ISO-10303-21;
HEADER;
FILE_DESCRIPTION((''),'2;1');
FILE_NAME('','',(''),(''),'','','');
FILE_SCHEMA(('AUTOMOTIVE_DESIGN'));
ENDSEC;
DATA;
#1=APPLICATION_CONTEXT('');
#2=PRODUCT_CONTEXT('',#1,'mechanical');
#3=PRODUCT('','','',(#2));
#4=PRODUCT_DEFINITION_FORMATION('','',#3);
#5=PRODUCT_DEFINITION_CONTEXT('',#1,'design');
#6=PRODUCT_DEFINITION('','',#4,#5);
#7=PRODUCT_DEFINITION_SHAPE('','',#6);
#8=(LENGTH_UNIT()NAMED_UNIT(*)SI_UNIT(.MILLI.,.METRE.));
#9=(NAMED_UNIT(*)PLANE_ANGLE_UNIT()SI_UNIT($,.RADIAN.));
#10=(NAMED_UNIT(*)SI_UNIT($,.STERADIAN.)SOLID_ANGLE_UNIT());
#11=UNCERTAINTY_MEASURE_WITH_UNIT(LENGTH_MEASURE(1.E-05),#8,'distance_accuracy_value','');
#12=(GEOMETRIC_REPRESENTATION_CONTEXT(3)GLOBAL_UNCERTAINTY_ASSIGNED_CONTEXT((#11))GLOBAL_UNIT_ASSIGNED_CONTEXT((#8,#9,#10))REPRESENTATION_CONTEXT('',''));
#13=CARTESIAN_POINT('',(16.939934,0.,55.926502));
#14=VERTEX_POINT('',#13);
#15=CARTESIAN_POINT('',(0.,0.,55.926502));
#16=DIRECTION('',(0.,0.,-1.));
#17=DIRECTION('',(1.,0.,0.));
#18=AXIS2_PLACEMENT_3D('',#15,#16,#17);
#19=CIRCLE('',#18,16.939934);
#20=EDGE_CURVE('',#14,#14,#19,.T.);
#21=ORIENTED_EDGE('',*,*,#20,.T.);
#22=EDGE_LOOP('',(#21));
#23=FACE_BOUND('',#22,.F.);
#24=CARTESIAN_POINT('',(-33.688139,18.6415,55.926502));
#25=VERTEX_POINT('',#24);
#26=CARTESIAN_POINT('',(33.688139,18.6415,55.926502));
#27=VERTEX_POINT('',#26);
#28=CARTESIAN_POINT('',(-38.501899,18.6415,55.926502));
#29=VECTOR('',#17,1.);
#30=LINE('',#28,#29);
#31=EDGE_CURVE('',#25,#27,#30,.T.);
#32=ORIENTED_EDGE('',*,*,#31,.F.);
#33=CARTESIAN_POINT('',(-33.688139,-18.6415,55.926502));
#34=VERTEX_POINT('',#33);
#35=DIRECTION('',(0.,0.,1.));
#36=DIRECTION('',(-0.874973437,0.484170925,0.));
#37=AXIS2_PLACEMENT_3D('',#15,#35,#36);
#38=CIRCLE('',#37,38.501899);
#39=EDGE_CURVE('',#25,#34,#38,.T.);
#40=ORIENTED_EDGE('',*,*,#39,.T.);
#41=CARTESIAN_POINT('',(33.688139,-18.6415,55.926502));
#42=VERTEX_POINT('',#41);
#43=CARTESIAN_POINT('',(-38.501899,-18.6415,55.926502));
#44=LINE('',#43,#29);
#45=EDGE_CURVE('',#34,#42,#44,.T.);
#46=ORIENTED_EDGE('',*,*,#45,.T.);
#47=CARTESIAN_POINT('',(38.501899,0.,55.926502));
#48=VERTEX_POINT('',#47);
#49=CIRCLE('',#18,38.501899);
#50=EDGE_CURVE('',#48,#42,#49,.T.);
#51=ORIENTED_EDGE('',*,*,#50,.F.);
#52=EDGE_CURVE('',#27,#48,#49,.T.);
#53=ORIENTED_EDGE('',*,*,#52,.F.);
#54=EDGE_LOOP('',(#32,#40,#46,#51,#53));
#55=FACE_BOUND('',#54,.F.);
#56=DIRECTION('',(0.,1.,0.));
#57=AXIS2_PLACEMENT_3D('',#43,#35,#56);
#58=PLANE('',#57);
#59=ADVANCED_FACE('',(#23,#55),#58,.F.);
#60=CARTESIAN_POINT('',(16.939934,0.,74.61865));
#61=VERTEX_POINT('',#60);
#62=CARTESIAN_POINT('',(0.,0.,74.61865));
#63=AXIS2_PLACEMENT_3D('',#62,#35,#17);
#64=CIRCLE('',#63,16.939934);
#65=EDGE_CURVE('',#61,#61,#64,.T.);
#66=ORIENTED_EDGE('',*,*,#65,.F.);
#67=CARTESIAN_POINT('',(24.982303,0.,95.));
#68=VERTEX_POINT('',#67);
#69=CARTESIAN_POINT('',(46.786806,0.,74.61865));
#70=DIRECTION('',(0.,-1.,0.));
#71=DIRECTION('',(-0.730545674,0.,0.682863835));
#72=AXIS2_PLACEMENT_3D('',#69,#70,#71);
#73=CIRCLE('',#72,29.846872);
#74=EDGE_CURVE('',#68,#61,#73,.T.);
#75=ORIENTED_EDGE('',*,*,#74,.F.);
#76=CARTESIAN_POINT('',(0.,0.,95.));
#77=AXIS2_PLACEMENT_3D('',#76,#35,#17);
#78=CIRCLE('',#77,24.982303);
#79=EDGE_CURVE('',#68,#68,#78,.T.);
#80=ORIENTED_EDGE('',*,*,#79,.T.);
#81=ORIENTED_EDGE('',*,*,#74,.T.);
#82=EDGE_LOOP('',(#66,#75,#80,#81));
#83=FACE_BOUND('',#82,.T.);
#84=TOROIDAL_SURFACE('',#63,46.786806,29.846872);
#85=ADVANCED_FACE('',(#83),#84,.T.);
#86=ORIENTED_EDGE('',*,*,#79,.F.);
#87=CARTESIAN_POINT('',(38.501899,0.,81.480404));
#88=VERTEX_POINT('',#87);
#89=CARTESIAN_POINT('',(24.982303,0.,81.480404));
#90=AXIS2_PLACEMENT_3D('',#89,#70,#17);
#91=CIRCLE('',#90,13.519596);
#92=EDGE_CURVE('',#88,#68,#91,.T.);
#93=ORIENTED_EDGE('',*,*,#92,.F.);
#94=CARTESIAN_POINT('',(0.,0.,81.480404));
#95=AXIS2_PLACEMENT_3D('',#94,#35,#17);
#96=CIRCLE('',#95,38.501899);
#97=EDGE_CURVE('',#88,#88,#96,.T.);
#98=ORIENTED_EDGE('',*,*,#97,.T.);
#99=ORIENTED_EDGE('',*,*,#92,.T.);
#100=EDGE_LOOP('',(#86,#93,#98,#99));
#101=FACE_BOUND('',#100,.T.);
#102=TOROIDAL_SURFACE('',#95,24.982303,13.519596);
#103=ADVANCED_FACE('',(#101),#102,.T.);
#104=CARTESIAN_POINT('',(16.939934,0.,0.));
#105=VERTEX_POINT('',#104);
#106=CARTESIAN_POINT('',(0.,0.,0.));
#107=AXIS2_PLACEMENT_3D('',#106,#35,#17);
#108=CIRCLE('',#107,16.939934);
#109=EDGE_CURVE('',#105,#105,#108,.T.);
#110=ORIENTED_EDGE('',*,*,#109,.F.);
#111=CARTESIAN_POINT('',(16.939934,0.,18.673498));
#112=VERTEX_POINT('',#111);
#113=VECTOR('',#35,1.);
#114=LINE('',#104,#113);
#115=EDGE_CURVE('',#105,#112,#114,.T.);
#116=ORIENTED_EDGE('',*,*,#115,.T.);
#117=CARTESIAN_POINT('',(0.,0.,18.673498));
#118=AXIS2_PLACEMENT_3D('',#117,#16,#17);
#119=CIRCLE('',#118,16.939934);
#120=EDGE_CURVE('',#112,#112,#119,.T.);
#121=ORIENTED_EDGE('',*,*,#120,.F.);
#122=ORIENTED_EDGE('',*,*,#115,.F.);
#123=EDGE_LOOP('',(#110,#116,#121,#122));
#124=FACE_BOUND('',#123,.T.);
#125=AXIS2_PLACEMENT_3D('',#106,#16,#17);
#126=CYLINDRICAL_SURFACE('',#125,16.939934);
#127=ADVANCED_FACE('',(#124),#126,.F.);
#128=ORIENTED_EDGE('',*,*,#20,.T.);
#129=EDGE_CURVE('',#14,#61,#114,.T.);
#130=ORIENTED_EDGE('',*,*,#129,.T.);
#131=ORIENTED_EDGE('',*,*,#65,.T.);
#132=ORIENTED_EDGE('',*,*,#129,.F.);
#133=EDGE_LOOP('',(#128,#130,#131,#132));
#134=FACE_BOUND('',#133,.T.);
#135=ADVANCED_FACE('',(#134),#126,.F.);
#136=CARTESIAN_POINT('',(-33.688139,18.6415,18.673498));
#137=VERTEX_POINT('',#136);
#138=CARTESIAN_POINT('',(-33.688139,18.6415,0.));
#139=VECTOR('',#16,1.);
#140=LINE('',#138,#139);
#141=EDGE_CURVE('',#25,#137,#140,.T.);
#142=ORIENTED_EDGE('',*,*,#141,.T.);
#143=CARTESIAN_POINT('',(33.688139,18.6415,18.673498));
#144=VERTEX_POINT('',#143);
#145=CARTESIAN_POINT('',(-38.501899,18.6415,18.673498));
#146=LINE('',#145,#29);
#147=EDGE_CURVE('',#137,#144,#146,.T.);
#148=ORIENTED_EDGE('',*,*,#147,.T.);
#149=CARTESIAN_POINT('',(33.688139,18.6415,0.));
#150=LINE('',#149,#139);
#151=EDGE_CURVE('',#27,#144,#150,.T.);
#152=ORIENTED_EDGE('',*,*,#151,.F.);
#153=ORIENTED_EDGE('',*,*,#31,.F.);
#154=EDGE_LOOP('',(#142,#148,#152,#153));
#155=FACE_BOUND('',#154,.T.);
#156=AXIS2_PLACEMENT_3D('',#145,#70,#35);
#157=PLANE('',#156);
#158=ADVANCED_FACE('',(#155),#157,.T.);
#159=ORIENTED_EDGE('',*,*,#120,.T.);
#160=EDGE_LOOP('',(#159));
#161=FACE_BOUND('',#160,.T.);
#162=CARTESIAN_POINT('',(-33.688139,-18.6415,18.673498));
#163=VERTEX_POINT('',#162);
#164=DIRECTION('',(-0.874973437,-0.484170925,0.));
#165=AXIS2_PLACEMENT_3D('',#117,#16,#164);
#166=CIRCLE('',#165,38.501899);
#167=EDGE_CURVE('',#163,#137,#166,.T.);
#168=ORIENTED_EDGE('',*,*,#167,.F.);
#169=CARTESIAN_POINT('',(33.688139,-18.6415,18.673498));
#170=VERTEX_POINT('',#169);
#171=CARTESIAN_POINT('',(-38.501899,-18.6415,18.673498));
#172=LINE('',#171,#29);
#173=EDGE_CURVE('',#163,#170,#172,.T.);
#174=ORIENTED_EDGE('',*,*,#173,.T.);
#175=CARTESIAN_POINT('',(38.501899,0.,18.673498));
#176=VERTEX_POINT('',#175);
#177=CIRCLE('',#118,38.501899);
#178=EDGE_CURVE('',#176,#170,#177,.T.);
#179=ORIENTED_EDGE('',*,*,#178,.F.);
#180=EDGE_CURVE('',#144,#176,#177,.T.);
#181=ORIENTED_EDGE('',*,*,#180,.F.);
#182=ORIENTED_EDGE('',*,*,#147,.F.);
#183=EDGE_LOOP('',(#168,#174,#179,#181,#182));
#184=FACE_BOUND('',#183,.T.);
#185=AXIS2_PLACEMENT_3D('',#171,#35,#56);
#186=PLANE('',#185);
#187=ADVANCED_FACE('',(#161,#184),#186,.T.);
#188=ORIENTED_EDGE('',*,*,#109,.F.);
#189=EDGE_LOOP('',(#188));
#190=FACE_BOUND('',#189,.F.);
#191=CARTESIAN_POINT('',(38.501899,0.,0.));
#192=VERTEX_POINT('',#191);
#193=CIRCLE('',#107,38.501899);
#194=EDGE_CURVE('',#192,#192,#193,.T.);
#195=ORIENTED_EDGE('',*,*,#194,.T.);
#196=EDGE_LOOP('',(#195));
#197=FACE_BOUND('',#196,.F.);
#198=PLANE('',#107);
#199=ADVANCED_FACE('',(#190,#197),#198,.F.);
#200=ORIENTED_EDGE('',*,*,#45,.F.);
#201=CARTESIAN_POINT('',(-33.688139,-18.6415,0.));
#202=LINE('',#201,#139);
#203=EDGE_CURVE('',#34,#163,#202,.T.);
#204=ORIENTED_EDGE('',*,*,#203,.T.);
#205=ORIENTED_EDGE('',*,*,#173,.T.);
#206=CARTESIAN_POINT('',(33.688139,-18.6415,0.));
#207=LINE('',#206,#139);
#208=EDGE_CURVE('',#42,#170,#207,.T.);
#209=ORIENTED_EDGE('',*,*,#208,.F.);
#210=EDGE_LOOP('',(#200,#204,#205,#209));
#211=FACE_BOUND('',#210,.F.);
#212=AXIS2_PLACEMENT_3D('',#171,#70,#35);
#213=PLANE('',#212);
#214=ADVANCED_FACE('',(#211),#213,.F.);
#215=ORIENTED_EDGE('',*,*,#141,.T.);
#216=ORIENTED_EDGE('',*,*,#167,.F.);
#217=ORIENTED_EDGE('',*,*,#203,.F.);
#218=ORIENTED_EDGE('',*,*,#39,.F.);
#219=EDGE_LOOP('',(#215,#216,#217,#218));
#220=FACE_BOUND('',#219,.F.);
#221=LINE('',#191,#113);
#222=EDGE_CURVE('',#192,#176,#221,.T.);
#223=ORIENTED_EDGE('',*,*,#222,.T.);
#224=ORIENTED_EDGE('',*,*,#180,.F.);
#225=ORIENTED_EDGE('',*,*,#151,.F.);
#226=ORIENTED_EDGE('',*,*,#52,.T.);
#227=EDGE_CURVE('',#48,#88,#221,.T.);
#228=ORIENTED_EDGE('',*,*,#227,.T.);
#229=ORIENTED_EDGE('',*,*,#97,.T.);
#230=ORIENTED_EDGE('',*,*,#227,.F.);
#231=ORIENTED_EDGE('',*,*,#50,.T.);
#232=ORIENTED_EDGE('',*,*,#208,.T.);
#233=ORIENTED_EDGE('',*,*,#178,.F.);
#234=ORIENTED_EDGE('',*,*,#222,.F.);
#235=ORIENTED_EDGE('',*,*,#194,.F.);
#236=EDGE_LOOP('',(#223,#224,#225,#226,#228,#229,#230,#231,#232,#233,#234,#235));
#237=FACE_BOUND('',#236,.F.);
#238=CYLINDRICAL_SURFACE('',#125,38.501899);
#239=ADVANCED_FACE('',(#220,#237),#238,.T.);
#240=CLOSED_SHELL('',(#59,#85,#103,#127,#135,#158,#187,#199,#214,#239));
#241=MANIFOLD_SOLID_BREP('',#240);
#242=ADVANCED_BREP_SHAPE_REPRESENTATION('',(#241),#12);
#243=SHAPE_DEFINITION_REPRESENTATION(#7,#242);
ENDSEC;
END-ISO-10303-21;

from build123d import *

# Parameters (mm, degrees)
F0_R     = 38.5018988787
F0_R_2   = 16.939934048
F1_DEPTH = 95
F5_W     = 37.283
F5_H     = 37.253003633
F6_DEPTH = 100
F7_R     = 13.5195959493


# Not quite as in the source:
# - a fillet or chamfer that OpenCascade refuses, or shapes differently, is made with other operations: its cross-section is extruded or revolved along the edge and cut away or added


with BuildPart() as f1:
    # F0 (on Top) → F1 (new body)
    with BuildSketch(Plane.XY):
        Circle(F0_R)
        Circle(F0_R_2, mode=Mode.SUBTRACT)
    extrude(amount=F1_DEPTH)

    # F5 (on line) → F6 (cut)
    with BuildSketch(Plane.YZ.offset(-38.5018988787)):
        with Locations((0, 37.3)):
            Rectangle(F5_W, F5_H)
    extrude(amount=F6_DEPTH, mode=Mode.SUBTRACT)

    # F7
    f7_edges = [f1.edges().sort_by_distance(p)[0] for p in [
        (-38.501899, 0, 95),
    ]]
    fillet(f7_edges, radius=F7_R)

    # F8: fillet of radius 29.8468724241 on 1 edges, made by hand

    # F8_s1 → F8_t2 (revolve, cut)
    with BuildSketch(Plane.XZ):
        with BuildLine():
            ThreePointArc((24.9823029294, 95), (19.0232329538, 85.5740041188), (16.939934048, 74.6186502225))
            Line((16.939934048, 74.6186502225), (16.939934048, 95))
            Line((16.939934048, 95), (24.9823029294, 95))
        make_face()
    revolve(axis=Axis((0, 0, 95), (0, 0, 1)), mode=Mode.SUBTRACT)


solid = f1.part
